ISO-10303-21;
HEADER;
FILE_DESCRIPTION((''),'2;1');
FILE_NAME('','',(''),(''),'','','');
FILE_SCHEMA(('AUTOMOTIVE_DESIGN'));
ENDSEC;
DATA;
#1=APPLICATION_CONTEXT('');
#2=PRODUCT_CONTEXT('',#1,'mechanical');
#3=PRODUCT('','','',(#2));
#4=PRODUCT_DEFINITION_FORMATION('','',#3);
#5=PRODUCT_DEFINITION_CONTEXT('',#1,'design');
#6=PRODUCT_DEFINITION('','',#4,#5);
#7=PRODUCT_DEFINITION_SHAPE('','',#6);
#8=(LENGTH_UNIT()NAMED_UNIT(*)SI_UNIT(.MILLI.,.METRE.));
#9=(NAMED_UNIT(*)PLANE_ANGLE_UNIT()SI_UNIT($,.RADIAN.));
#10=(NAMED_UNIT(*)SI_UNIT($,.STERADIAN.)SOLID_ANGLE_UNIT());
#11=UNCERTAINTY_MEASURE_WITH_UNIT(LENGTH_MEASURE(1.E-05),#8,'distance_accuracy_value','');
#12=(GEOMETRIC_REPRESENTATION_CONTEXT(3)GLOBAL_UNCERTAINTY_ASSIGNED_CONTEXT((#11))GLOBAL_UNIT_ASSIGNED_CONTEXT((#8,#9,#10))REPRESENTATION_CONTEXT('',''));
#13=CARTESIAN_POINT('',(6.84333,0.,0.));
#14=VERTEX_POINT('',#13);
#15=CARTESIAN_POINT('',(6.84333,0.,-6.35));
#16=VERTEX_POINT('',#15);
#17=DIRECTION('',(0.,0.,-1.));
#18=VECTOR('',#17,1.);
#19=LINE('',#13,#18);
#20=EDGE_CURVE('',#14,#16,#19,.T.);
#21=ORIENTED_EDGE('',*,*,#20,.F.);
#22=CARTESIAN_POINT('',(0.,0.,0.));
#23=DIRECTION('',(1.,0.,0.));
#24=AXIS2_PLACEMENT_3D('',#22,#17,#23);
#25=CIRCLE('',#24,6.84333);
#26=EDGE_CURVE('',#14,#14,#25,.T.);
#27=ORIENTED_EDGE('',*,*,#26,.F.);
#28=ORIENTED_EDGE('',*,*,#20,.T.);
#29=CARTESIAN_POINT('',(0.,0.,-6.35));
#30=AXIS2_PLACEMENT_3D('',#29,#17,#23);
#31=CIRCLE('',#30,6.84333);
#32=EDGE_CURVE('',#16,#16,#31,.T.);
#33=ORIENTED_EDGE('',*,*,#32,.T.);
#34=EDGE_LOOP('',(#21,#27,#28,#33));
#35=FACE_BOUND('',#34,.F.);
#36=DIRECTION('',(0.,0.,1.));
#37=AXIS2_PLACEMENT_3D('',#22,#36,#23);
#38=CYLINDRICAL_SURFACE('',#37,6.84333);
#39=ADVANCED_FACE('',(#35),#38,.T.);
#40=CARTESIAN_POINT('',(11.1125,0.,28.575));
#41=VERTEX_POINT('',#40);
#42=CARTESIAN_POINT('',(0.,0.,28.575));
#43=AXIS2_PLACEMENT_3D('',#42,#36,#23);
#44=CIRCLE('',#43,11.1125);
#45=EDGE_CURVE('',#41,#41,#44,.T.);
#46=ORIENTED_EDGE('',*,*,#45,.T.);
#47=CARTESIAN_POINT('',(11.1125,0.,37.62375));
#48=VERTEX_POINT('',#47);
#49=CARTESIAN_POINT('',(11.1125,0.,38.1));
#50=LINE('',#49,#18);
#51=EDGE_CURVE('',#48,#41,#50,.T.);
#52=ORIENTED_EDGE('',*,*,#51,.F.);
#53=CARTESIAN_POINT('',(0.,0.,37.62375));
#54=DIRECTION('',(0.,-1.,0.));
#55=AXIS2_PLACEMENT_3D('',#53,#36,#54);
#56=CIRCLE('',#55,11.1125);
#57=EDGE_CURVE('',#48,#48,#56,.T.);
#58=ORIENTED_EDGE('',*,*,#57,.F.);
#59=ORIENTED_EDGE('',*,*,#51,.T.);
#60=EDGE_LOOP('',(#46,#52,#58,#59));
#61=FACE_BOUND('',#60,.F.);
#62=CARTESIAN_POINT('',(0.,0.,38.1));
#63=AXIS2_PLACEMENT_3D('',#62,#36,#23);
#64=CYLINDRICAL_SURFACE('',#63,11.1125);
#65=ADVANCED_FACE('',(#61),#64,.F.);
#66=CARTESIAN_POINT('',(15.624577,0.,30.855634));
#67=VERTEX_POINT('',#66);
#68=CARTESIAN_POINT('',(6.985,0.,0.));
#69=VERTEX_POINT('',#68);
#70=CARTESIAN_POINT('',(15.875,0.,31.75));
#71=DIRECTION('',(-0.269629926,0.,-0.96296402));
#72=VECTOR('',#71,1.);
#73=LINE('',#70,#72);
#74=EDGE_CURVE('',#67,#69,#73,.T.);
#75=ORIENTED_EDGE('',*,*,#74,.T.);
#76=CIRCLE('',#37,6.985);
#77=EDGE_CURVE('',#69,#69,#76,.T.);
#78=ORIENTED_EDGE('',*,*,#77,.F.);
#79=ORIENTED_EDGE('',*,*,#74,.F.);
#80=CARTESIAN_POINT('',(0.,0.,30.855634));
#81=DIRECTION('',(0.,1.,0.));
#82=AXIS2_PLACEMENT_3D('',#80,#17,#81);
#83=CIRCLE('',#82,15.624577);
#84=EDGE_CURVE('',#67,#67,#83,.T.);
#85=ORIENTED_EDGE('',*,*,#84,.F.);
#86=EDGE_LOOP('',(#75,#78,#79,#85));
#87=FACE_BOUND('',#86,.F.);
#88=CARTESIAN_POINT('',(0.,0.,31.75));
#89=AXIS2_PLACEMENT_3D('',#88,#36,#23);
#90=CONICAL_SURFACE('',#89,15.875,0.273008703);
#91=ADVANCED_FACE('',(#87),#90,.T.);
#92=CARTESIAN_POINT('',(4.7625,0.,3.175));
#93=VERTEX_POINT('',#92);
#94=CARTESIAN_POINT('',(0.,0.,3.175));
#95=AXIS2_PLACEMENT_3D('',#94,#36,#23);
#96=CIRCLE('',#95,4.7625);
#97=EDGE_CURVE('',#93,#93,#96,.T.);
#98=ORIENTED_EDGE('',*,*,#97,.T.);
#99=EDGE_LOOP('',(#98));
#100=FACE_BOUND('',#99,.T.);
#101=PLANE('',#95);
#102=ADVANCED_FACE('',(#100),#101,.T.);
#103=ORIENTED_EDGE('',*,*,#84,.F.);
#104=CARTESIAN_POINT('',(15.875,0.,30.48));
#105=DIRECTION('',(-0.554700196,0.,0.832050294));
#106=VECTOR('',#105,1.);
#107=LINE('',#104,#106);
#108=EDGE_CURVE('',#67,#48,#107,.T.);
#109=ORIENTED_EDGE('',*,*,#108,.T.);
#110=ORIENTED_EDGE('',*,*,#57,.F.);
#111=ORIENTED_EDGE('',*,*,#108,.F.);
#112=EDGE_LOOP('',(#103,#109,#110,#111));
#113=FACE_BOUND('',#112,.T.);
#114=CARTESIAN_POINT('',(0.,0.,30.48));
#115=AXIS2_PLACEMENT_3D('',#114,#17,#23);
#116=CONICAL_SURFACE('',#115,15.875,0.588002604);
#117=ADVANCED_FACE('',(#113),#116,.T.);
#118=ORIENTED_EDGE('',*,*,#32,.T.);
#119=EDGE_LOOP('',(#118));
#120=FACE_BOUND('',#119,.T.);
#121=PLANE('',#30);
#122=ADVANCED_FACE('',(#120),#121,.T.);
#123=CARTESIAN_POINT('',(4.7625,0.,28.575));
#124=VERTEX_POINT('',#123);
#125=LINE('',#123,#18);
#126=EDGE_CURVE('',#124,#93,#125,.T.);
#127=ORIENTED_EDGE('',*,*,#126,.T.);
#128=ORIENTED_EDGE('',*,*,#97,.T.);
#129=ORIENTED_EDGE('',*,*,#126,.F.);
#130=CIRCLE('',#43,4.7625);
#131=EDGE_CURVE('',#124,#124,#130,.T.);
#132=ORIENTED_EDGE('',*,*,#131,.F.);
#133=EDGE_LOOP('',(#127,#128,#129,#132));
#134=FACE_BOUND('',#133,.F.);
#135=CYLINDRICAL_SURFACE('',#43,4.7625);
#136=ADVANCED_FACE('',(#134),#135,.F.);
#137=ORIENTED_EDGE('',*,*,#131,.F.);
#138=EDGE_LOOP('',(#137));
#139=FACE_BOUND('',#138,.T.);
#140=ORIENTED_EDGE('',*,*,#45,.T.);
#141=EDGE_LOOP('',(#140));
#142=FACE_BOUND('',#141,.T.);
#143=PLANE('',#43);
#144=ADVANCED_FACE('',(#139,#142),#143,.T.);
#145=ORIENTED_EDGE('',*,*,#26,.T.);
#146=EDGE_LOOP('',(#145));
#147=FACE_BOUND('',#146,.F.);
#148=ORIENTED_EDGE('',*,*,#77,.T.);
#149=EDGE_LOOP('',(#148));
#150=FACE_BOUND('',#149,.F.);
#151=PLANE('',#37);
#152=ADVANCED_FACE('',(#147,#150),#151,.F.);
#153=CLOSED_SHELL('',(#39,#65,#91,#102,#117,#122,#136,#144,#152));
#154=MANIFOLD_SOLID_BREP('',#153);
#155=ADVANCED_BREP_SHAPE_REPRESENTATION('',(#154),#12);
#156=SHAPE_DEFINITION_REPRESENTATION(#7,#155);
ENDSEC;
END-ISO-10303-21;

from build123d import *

# Parameters (mm, degrees)
F0_R     = 15.875
F1_DEPTH = 31.75
F2_R     = 6.8433299252
F3_DEPTH = 6.35
F4_DEPTH = 6.35
F5_R     = 11.1125
F6_DEPTH = 9.525
F7_R     = 4.7625
F8_DEPTH = 25.4
F9_SIZE2 = 8.89
F9_SIZE  = 31.75


# Not quite as in the source:
# - a fillet or chamfer that OpenCascade refuses, or shapes differently, is made with other operations: its cross-section is extruded or revolved along the edge and cut away or added


with BuildPart() as f1:
    # F0 (on Top) → F1 (new body)
    with BuildSketch(Plane.XY):
        Circle(F0_R)
    extrude(amount=F1_DEPTH)

    # F2 (on face) → F3 (join)
    with BuildSketch(Plane(origin=(0, 0, 0), x_dir=(1, 0, 0), z_dir=(0, 0, -1))):
        Circle(F2_R)
    extrude(amount=F3_DEPTH)

    # F4 (add): a face of the model
    f4_faces = [f1.faces().sort_by_distance(p)[0] for p in [
        (0, 0, 31.75),
    ]]
    extrude(f4_faces, amount=F4_DEPTH)

    # F5 (on face) → F6 (cut)
    with BuildSketch(Plane.XY.offset(38.1)):
        Circle(F5_R)
    extrude(amount=-F6_DEPTH, mode=Mode.SUBTRACT)

    # F7 (on face) → F8 (cut)
    with BuildSketch(Plane.XY.offset(28.575)):
        Circle(F7_R)
    extrude(amount=-F8_DEPTH, mode=Mode.SUBTRACT)

    # F9
    f9_edges = [f1.edges().sort_by_distance(p)[0] for p in [
        (-15.875, 0, 0),
    ]]
    f9_side = f1.faces().sort_by_distance((-15.875, 0, 19.05))[0]
    chamfer(f9_edges, length=F9_SIZE, length2=F9_SIZE2, reference=f9_side)

    # F10: chamfer of 5.08 x 7.62 on 1 edges, made by hand

    # F10_s1 → F10_t2 (revolve, cut)
    with BuildSketch(Plane.XZ):
        Polygon((15.875, 30.48), (10.795, 38.1), (15.875, 38.1), align=None)
    revolve(axis=Axis((0, 0, 38.1), (0, 0, 1)), mode=Mode.SUBTRACT)


solid = f1.part
